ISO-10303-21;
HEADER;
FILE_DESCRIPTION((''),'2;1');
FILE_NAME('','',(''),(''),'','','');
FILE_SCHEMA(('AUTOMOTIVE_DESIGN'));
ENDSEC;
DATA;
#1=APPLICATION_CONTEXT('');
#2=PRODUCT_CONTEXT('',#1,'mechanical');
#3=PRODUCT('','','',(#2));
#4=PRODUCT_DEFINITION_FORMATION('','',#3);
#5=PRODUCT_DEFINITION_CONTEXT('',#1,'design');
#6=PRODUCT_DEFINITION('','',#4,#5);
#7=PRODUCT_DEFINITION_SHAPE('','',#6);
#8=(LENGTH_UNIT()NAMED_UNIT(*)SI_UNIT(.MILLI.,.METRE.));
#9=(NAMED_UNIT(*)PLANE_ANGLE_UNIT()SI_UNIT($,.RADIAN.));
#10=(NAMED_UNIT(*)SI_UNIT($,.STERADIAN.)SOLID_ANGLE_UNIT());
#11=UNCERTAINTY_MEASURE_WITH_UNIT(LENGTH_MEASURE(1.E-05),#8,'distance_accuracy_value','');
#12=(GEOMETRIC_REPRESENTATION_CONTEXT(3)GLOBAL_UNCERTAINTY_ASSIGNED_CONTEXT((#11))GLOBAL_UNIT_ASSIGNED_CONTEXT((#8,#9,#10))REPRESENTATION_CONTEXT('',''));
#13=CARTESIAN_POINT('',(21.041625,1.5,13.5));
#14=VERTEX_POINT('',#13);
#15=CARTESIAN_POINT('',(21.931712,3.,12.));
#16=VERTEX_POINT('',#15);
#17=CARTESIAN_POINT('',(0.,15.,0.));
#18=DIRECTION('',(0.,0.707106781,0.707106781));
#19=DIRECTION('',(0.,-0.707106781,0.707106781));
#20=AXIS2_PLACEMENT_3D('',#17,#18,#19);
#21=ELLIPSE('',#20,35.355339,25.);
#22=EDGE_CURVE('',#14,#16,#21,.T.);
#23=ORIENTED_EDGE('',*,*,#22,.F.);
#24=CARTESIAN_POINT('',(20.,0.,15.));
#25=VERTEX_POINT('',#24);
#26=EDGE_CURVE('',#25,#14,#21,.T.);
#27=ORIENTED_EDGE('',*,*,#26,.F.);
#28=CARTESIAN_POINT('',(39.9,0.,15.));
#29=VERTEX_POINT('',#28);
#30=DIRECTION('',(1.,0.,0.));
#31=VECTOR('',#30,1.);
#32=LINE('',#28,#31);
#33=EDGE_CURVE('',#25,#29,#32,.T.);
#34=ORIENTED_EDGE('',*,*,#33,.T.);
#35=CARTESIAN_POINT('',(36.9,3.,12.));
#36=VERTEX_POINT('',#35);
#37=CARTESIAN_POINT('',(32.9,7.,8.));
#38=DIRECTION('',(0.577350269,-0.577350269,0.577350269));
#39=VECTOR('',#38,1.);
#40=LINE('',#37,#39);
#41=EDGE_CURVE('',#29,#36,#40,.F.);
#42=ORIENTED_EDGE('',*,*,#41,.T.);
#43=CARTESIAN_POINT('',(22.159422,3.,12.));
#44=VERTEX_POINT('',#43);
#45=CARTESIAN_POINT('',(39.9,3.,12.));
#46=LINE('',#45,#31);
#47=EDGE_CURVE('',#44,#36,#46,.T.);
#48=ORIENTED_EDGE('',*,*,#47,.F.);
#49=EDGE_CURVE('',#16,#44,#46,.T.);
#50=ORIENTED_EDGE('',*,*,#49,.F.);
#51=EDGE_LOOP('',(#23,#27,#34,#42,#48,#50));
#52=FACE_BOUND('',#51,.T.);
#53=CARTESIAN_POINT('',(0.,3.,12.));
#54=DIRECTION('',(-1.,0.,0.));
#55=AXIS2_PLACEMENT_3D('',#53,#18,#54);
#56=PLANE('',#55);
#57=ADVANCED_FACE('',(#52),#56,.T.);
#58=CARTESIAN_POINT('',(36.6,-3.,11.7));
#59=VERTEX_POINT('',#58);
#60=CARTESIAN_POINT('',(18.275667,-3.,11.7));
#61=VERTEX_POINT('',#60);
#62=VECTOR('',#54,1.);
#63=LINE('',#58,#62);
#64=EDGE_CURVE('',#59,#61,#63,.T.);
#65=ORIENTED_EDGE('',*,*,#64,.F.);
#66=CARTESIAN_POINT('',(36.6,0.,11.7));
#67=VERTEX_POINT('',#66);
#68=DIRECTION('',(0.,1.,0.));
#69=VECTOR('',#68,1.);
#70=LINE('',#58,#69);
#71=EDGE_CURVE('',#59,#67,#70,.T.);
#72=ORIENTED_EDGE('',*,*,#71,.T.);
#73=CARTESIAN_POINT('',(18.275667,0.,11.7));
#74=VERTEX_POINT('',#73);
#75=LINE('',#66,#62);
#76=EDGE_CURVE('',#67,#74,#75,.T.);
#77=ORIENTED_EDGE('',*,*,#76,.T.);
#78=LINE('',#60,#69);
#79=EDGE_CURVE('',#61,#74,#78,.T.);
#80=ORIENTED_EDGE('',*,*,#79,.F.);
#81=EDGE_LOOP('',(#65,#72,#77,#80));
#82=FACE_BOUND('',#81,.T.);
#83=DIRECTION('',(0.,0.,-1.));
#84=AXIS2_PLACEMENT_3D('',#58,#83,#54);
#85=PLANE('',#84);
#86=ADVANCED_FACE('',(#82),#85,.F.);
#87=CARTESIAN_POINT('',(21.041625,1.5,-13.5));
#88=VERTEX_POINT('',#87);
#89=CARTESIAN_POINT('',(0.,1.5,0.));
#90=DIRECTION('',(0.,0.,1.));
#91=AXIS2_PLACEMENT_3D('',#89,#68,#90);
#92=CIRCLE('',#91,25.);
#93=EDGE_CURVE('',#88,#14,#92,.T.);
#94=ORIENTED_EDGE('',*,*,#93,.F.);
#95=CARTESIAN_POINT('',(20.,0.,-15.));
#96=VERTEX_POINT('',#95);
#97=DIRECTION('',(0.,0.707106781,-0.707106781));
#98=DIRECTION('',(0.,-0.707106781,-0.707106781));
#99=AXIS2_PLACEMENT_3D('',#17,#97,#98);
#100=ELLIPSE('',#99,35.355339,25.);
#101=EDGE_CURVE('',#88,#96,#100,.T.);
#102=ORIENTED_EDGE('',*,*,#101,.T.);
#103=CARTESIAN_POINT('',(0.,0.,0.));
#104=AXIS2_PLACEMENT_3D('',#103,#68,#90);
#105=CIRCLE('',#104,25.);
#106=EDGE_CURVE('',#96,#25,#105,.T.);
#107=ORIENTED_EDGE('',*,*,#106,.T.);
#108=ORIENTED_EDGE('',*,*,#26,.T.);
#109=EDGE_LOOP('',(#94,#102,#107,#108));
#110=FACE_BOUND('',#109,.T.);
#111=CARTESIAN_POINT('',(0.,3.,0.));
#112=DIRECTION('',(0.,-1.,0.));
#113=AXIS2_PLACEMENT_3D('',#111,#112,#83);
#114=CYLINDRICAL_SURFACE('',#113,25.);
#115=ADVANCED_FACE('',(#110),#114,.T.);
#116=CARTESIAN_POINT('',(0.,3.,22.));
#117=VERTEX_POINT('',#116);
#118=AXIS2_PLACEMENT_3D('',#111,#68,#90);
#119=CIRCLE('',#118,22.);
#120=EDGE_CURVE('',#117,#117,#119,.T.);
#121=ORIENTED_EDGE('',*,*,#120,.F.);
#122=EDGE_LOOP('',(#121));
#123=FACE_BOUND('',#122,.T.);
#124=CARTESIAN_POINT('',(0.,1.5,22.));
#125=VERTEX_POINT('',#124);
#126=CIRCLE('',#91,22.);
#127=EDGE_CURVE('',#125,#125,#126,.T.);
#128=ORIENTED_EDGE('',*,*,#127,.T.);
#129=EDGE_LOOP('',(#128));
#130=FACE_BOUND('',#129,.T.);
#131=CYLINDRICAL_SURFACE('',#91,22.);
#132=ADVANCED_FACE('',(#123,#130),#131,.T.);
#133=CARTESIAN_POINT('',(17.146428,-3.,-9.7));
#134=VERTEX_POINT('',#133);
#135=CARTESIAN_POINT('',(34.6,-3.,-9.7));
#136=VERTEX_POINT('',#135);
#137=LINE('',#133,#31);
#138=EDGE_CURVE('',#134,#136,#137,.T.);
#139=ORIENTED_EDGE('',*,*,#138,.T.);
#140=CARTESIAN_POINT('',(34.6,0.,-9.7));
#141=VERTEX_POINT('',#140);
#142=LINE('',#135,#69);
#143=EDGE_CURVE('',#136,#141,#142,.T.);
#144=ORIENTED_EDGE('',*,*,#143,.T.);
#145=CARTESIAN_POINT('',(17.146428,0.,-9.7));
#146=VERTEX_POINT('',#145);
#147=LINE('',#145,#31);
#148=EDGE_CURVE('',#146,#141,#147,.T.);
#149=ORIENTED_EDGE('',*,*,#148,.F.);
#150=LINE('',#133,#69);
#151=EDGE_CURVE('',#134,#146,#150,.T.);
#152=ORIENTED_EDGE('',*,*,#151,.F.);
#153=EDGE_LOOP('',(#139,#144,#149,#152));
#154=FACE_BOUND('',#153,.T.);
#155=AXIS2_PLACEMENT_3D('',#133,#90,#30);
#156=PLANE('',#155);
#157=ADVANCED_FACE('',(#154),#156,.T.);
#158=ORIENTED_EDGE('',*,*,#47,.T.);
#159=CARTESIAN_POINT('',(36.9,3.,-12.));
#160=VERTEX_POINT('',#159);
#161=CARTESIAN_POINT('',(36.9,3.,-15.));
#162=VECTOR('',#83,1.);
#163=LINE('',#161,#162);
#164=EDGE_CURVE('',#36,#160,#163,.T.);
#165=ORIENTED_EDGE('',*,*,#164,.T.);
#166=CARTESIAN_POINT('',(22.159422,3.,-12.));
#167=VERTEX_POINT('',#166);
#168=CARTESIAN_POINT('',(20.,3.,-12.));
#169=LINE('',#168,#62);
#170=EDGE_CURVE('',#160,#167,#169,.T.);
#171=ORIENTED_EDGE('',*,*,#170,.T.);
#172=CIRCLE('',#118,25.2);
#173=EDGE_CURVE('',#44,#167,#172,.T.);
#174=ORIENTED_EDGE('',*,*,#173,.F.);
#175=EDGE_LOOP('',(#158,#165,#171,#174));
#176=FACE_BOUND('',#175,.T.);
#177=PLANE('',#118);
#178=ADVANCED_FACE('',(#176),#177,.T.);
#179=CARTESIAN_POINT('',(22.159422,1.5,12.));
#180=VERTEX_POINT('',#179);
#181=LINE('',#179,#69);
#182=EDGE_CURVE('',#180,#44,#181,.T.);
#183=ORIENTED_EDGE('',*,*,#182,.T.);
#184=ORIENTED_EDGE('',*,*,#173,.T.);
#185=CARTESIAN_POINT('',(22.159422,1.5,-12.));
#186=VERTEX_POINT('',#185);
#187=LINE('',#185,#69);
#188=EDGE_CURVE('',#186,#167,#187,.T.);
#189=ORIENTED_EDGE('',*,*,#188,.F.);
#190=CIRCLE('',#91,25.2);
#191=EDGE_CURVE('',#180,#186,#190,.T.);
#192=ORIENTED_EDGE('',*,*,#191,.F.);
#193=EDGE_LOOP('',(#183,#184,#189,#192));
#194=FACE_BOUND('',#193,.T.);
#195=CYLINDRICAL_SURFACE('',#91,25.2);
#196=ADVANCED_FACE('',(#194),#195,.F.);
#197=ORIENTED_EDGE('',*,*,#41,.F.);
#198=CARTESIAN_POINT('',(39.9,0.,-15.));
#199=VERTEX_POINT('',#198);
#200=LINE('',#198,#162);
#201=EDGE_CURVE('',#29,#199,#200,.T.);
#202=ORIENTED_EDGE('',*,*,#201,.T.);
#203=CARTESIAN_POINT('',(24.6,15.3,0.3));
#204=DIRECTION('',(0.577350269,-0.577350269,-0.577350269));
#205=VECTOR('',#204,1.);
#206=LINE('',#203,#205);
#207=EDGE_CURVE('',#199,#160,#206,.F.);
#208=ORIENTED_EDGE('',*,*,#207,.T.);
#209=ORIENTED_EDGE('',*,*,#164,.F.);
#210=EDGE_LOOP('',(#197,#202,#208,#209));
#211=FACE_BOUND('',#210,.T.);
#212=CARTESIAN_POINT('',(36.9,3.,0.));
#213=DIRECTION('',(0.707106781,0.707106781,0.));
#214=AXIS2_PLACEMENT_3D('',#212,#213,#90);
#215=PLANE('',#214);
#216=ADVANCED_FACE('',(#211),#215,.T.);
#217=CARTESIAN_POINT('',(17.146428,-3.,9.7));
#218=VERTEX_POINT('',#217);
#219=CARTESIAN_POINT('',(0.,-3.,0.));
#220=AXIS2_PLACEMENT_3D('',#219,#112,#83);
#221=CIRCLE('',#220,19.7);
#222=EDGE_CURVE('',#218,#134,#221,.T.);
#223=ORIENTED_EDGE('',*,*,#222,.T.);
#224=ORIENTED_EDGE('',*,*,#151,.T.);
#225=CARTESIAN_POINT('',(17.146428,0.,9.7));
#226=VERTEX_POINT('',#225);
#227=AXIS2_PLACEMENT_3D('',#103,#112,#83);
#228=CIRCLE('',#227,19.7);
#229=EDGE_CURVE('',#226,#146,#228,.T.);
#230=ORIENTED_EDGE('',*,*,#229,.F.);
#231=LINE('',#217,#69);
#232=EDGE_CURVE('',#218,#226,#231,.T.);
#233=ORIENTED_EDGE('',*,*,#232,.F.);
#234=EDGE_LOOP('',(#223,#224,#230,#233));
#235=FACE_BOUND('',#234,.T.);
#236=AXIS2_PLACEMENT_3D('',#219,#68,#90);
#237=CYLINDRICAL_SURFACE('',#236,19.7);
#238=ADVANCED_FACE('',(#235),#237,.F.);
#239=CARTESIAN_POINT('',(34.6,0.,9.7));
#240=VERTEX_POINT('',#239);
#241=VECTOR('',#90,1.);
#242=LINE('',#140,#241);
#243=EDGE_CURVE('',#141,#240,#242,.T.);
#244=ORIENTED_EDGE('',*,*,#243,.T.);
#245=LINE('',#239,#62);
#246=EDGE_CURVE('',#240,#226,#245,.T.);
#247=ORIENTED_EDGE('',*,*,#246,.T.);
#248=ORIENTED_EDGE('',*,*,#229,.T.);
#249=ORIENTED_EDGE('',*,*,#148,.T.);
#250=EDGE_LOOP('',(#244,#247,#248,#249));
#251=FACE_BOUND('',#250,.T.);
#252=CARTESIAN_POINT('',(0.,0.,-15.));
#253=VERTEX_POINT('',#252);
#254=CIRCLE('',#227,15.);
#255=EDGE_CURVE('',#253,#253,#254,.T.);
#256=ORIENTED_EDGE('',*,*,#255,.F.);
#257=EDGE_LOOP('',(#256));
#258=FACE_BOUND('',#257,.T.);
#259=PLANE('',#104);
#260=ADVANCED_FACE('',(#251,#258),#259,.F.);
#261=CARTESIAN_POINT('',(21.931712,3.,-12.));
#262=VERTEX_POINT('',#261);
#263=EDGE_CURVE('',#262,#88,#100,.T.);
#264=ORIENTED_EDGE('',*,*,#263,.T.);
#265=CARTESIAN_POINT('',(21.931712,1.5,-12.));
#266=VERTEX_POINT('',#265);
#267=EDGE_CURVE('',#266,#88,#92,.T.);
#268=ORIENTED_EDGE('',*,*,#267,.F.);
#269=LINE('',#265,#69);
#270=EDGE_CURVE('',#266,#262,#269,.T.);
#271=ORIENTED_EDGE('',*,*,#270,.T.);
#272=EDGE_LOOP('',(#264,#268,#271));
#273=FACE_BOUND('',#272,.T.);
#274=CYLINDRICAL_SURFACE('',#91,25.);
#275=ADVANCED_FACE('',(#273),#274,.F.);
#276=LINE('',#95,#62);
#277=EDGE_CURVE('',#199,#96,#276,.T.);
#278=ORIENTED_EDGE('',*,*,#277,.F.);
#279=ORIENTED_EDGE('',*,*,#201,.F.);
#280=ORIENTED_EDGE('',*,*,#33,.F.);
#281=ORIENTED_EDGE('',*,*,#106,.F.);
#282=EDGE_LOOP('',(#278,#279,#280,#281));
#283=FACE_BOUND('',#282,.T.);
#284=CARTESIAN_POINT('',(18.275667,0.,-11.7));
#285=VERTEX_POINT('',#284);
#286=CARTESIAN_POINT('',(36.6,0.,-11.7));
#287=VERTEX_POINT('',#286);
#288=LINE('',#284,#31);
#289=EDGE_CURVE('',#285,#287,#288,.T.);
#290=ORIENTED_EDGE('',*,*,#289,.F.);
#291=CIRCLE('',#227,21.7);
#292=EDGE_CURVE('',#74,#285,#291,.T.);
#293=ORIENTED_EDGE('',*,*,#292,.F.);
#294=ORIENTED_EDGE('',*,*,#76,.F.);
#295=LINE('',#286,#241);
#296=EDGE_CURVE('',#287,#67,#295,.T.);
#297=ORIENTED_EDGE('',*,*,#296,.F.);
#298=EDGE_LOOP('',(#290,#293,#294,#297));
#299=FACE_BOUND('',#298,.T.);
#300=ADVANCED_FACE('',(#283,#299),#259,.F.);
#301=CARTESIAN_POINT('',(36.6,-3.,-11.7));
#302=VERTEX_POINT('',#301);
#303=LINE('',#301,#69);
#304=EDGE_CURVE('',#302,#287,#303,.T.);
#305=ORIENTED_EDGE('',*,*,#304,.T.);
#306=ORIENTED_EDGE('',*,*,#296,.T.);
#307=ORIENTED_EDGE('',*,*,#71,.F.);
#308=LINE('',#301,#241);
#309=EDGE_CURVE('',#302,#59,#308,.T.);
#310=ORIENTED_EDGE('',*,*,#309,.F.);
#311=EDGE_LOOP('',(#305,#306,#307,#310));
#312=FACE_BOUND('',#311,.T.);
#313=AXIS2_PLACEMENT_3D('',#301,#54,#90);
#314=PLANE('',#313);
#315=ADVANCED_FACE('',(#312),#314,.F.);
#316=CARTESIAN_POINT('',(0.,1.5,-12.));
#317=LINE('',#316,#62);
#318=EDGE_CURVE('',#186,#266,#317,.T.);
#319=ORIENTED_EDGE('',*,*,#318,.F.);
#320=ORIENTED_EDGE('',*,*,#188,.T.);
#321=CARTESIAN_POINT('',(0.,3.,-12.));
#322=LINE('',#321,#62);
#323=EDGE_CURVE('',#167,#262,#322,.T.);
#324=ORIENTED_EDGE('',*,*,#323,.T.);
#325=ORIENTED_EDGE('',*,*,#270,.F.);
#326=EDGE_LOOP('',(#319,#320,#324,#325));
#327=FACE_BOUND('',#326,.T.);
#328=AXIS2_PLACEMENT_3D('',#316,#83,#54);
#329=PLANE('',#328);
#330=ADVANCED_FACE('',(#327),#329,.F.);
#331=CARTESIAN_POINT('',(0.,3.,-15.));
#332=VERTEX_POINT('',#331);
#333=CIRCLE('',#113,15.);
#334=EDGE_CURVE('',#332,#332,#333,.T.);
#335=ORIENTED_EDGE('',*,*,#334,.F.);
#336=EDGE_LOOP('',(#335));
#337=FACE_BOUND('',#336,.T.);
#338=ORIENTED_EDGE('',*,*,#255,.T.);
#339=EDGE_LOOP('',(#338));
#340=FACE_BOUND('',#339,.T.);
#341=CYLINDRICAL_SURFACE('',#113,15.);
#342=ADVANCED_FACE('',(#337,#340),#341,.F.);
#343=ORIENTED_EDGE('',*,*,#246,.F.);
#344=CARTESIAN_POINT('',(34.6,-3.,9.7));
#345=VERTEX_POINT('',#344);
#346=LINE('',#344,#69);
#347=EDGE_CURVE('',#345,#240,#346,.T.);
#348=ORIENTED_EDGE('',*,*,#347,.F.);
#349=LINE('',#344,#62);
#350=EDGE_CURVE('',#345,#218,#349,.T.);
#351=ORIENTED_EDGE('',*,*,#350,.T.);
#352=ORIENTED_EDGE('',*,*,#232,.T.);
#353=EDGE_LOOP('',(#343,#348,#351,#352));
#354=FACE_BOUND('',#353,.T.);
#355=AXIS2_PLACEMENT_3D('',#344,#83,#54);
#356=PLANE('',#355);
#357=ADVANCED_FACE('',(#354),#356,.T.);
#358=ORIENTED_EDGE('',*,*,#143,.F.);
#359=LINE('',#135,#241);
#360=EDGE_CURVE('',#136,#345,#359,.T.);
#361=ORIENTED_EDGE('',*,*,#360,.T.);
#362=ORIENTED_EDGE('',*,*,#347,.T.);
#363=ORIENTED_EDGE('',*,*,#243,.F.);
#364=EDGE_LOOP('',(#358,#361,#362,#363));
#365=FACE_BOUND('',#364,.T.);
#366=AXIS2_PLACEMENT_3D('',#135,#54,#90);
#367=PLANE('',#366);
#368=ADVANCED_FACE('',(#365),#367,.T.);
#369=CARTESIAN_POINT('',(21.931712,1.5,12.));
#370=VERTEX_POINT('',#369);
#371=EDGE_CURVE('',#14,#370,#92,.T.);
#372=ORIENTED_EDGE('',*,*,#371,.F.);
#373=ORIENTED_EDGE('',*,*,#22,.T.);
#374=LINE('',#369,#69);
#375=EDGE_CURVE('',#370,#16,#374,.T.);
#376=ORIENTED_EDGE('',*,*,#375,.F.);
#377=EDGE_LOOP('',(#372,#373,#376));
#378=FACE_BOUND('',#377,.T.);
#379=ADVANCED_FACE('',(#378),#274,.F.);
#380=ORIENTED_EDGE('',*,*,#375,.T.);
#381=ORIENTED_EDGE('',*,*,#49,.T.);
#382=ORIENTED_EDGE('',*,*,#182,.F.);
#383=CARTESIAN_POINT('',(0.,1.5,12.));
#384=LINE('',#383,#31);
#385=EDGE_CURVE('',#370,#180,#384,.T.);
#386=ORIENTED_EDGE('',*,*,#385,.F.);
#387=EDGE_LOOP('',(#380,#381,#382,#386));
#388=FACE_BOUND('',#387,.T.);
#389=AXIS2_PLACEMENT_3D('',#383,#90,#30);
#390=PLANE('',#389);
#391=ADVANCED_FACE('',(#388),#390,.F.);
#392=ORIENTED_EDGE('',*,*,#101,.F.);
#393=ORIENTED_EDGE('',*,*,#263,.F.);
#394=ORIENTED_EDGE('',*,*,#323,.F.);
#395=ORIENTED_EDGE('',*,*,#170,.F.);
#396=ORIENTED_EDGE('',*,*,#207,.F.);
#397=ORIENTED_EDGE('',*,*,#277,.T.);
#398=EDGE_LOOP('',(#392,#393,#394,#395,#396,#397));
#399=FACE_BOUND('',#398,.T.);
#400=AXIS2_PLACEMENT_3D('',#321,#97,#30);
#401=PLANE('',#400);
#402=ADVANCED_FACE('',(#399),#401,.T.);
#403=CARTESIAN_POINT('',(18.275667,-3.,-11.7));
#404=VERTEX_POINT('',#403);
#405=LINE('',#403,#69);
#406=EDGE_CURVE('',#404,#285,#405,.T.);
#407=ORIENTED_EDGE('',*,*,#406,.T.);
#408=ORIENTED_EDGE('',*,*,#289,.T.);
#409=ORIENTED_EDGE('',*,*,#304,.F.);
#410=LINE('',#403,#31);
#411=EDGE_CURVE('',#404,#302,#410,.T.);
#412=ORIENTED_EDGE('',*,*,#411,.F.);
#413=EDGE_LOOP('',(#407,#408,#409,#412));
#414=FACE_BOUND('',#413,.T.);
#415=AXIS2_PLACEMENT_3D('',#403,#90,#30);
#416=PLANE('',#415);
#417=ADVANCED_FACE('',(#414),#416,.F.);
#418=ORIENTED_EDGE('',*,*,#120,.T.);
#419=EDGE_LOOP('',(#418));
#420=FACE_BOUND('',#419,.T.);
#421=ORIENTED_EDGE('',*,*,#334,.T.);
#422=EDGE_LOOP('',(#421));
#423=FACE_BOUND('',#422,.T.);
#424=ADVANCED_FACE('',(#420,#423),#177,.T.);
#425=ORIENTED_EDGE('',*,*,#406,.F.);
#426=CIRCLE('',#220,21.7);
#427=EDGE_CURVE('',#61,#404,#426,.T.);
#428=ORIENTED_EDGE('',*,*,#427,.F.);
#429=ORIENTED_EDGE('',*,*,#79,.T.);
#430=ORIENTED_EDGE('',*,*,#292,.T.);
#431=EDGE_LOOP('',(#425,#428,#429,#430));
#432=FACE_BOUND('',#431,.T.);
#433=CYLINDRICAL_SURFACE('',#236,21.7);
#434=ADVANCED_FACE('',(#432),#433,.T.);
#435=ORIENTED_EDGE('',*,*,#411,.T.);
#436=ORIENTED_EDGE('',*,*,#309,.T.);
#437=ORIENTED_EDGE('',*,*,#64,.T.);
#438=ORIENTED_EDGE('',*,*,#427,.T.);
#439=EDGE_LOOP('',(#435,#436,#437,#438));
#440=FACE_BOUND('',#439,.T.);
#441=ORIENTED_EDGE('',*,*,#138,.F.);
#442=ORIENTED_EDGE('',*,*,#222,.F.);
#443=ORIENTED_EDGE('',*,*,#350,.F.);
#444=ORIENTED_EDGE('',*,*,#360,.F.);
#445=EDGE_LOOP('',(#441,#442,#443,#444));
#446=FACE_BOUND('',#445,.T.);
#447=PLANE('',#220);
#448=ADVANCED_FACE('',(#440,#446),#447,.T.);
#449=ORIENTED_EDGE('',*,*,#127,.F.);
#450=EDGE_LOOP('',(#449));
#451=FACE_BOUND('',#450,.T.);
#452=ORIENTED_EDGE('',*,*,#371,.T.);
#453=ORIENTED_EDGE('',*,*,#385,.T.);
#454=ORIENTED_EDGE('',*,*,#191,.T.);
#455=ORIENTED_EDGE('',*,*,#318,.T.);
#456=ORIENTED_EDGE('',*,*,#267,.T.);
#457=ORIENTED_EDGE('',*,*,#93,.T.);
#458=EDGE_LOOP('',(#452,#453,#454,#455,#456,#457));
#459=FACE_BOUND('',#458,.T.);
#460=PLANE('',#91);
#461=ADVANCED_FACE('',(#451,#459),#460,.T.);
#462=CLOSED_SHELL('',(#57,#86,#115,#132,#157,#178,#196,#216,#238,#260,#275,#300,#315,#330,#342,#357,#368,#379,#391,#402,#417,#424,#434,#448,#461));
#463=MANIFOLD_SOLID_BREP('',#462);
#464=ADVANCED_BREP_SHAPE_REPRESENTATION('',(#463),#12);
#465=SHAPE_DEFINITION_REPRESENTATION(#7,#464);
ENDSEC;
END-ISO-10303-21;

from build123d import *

# Parameters (mm, degrees)
BOSS_EXTRUDE1_DEPTH    = 3
BOSS_EXTRUDE2_DEPTH    = 3
SKETCH3_R              = 15
CUT_EXTRUDE1_DEPTH     = 3
CHAMFER1_SIZE          = 3
CUT_EXTRUDE2_START     = -1.5
CUT_EXTRUDE2_OUTLINE_R = 22
CUT_EXTRUDE2_DEPTH     = 1.5


# Read off the part's stored shape, not the designer's step: Cut-Extrude2
with BuildPart() as part:
    # Sketch1 → Boss-Extrude1 (new body)
    with BuildSketch(Plane(origin=(0, 0, 0), x_dir=(1, 0, 0), z_dir=(0, 1, 0))):
        with BuildLine():
            Line((20, 15), (39.9, 15))
            Line((39.9, 15), (39.9, -15))
            Line((39.9, -15), (20, -15))
            ThreePointArc((20, -15), (-25, 0), (20, 15))
        make_face()
    extrude(amount=BOSS_EXTRUDE1_DEPTH)

    # Sketch2 → Boss-Extrude2 (add)
    with BuildSketch(Plane.XZ):
        with BuildLine():
            Line((18.275666882, -11.7), (36.6, -11.7))
            Line((36.6, -11.7), (36.6, 11.7))
            Line((36.6, 11.7), (18.275666882, 11.7))
            ThreePointArc((18.275666882, 11.7), (-21.7, 0), (18.275666882, -11.7))
        make_face()
        with BuildLine():
            Line((17.146428199, -9.7), (34.6, -9.7))
            Line((34.6, -9.7), (34.6, 9.7))
            Line((34.6, 9.7), (17.146428199, 9.7))
            ThreePointArc((17.146428199, 9.7), (-19.7, 0), (17.146428199, -9.7))
        make_face(mode=Mode.SUBTRACT)
    extrude(amount=BOSS_EXTRUDE2_DEPTH)

    # Sketch3 → Cut-Extrude1 (cut)
    with BuildSketch(Plane.XZ):
        with Locations(Location((0, 0, 0), (0, 0, 270))):
            Circle(SKETCH3_R)
    extrude(amount=-CUT_EXTRUDE1_DEPTH, mode=Mode.SUBTRACT)

    # Chamfer1
    chamfer1_edges = [part.edges().sort_by_distance(p)[0] for p in [
        (29.95, 3, 15),
        (39.9, 3, 0),
        (29.95, 3, -15),
    ]]
    chamfer(chamfer1_edges, length=CHAMFER1_SIZE - 0.0001)  # a hair under: the kernel refuses the full size

    # Cut-Extrude2 outline → Cut-Extrude2 (cut)
    with BuildSketch(Plane(origin=(0, 3, 0), x_dir=(1, 0, 0), z_dir=(0, 1, 0)).offset(CUT_EXTRUDE2_START)):
        with BuildLine():
            Line((22.159422375, 12), (21.931712199, 12))
            ThreePointArc((21.931712199, 12), (21.499754333, 12.757764836), (21.041625413, 13.5))
            ThreePointArc((21.041625413, 13.5), (-25, 0), (21.041625412, -13.5))
            ThreePointArc((21.041625412, -13.5), (21.499754333, -12.757764836), (21.931712199, -12))
            Line((21.931712199, -12), (22.159422375, -12))
            ThreePointArc((22.159422375, -12), (25.2, 0), (22.159422375, 12))
        make_face()
        Circle(CUT_EXTRUDE2_OUTLINE_R, mode=Mode.SUBTRACT)
    extrude(amount=CUT_EXTRUDE2_DEPTH, mode=Mode.SUBTRACT)


solid = part.part
